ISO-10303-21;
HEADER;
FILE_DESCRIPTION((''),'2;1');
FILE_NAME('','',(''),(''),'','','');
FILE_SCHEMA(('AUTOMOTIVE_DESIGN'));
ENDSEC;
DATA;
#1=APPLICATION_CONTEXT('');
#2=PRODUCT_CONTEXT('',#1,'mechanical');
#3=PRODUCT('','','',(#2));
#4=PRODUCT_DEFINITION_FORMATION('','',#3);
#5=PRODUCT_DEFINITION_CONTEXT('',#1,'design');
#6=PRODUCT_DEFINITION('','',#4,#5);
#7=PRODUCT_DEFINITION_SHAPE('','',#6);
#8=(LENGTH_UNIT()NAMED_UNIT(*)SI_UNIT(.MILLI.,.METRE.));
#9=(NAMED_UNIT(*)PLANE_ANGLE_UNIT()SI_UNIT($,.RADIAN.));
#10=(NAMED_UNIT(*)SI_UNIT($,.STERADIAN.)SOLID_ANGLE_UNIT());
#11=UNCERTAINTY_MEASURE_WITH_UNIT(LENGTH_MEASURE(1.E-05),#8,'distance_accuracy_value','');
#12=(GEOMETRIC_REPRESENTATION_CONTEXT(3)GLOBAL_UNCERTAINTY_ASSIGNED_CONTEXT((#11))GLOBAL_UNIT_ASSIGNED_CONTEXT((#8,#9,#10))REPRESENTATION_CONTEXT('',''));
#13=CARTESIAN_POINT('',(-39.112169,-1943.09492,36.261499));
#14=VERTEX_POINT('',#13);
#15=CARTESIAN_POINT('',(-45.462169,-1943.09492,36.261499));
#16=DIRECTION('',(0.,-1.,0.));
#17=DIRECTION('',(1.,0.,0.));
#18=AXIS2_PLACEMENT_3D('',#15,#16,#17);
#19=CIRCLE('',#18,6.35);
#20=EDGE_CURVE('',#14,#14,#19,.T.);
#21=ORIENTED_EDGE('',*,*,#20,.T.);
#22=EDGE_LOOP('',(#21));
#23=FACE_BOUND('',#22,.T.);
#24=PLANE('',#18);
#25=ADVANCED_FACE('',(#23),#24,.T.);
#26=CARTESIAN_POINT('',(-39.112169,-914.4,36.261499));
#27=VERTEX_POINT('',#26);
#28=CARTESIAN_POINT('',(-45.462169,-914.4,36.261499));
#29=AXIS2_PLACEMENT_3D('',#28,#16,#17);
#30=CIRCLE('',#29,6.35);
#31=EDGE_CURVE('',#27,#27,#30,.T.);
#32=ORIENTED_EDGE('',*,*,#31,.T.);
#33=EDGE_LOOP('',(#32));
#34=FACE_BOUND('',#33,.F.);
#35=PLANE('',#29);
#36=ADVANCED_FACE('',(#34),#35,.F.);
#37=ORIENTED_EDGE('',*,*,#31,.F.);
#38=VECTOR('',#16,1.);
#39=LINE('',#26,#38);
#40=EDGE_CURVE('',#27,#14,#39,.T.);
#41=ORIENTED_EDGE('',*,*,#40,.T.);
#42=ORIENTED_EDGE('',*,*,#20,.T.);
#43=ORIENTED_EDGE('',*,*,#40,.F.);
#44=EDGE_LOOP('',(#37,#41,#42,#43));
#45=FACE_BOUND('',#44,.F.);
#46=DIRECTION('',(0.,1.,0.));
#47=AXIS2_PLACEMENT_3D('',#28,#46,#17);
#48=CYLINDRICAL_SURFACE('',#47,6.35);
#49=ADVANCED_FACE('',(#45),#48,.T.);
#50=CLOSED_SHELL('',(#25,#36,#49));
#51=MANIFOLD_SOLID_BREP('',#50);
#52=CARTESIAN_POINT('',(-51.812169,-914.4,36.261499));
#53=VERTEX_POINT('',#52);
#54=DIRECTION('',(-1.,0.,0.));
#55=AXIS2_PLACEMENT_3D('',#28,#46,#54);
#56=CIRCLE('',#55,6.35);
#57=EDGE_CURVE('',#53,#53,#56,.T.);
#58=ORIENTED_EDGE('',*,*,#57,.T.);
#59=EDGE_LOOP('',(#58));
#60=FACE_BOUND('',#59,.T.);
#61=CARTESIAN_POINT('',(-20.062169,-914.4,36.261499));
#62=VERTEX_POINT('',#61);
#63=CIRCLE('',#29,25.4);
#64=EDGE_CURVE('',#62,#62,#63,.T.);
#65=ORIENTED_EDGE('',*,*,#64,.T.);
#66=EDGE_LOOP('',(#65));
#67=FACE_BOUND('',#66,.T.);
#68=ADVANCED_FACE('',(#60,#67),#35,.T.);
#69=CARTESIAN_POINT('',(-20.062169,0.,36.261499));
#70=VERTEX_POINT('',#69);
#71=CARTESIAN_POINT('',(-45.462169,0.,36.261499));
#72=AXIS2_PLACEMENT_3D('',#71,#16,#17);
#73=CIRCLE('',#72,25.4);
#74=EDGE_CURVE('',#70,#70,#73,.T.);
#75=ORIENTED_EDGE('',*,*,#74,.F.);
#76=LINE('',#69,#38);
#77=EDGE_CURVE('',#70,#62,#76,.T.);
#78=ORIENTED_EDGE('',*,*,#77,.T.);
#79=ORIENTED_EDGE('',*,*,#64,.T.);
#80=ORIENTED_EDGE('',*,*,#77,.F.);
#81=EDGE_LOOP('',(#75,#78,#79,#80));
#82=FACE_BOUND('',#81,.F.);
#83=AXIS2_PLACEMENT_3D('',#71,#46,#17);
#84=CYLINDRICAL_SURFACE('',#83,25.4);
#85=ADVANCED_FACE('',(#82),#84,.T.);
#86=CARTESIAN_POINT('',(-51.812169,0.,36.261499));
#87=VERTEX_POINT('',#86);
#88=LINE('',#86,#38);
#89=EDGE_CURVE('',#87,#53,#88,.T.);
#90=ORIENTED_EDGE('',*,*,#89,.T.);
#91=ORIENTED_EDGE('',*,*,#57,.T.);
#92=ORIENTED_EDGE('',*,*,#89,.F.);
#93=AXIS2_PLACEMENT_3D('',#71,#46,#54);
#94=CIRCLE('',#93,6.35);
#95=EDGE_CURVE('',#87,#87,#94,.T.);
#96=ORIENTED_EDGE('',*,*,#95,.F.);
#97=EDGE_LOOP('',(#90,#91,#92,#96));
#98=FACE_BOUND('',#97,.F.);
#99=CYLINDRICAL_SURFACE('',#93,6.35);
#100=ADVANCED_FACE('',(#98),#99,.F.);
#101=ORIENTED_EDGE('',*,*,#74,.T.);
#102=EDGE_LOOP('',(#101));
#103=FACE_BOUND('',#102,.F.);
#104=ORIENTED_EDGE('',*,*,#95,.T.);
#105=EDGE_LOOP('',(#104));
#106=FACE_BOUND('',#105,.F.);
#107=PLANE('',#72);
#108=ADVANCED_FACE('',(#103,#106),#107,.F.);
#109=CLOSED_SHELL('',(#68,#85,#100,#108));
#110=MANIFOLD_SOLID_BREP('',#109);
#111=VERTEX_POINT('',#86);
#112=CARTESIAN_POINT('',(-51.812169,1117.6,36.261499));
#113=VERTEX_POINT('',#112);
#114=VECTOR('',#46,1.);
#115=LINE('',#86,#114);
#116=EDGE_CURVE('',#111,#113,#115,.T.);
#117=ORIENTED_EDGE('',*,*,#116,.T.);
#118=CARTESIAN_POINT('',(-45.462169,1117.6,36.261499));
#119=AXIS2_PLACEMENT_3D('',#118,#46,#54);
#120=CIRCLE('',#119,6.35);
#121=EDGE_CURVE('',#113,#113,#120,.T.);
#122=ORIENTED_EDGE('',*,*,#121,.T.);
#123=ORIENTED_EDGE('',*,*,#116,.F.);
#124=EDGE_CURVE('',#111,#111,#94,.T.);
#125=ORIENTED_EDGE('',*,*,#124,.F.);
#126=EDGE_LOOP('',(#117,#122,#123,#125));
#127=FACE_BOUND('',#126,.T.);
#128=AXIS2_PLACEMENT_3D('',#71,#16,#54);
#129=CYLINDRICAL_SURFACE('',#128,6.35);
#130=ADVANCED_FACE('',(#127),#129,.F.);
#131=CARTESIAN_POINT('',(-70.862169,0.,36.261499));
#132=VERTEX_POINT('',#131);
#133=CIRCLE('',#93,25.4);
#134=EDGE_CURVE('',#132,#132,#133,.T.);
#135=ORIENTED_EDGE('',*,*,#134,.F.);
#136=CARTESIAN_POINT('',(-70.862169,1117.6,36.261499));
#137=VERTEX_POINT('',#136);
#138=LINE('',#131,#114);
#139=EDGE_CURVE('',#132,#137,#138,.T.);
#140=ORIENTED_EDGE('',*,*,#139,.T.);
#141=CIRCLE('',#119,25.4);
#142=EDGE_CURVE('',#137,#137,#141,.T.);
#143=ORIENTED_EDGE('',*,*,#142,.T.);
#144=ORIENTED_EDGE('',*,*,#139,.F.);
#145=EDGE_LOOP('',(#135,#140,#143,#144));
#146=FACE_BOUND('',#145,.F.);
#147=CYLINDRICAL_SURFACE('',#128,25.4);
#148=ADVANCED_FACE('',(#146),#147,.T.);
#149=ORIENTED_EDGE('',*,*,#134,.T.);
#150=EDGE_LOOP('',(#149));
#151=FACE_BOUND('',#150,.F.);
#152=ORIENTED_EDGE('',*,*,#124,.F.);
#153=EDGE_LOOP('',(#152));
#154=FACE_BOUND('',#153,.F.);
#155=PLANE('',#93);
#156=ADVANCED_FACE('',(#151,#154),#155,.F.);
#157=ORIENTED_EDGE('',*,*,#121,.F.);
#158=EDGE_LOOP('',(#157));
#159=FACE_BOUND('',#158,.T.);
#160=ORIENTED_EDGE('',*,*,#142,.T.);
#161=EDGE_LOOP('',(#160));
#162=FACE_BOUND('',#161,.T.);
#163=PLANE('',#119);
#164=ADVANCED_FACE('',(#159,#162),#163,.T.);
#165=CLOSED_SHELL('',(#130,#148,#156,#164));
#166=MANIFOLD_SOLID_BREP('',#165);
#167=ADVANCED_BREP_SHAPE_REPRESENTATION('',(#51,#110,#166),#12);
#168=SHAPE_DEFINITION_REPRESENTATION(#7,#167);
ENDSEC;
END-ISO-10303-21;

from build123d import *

# Parameters (mm, degrees)
F0_R       = 25.4
F1_DEPTH   = 914.4
F1_FACE1_R = 25.4
F2_R       = 6.35
F3_DEPTH   = 1028.69492
F4_R       = 6.35
F5_DEPTH   = 1028.69492
F6_R       = 25.4
F6_R_2     = 6.35
F7_DEPTH   = 1117.6


# Not quite as in the source:
# - an extrude ends at something that could not be found from the text; its depth is read off the source's solid


with BuildPart() as f1:
    # F0 (on Front) → F1 (new body)
    with BuildSketch(Plane.XZ):
        with Locations((-45.4621687531, 36.2614989281)):
            Circle(F0_R)
    extrude(amount=F1_DEPTH)

    # F1_face1 (on face) + F2 (on face) → F3 (cut, through all)
    with BuildSketch(Plane(origin=(-45.4621687531, -914.4, 36.2614989281), x_dir=(1, 0, 0), z_dir=(0, -1, 0))):
        Circle(F1_FACE1_R)
    with BuildSketch(Plane(origin=(0, 0, 0), x_dir=(-1, 0, 0), z_dir=(0, 1, 0))):
        with Locations((45.4621687531, 36.2614989281)):
            Circle(F2_R)
    extrude(amount=F3_DEPTH, dir=(0, -1, 0), mode=Mode.SUBTRACT)


with BuildPart() as f5:
    # F4 (on face) → F5 (new body)
    with BuildSketch(Plane.XZ.offset(914.4)):
        with Locations((-45.4621687531, 36.2614989281)):
            Circle(F4_R)
    extrude(amount=F5_DEPTH)


with BuildPart() as f7:
    # F6 (on face) → F7 (new body)
    with BuildSketch(Plane(origin=(0, 0, 0), x_dir=(-1, 0, 0), z_dir=(0, 1, 0))):
        with Locations((45.4621687531, 36.2614989281)):
            Circle(F6_R)
        with Locations((45.4621687531, 36.2614989281)):
            Circle(F6_R_2, mode=Mode.SUBTRACT)
    extrude(amount=F7_DEPTH)


solid = Compound([f1.part, f5.part, f7.part])
